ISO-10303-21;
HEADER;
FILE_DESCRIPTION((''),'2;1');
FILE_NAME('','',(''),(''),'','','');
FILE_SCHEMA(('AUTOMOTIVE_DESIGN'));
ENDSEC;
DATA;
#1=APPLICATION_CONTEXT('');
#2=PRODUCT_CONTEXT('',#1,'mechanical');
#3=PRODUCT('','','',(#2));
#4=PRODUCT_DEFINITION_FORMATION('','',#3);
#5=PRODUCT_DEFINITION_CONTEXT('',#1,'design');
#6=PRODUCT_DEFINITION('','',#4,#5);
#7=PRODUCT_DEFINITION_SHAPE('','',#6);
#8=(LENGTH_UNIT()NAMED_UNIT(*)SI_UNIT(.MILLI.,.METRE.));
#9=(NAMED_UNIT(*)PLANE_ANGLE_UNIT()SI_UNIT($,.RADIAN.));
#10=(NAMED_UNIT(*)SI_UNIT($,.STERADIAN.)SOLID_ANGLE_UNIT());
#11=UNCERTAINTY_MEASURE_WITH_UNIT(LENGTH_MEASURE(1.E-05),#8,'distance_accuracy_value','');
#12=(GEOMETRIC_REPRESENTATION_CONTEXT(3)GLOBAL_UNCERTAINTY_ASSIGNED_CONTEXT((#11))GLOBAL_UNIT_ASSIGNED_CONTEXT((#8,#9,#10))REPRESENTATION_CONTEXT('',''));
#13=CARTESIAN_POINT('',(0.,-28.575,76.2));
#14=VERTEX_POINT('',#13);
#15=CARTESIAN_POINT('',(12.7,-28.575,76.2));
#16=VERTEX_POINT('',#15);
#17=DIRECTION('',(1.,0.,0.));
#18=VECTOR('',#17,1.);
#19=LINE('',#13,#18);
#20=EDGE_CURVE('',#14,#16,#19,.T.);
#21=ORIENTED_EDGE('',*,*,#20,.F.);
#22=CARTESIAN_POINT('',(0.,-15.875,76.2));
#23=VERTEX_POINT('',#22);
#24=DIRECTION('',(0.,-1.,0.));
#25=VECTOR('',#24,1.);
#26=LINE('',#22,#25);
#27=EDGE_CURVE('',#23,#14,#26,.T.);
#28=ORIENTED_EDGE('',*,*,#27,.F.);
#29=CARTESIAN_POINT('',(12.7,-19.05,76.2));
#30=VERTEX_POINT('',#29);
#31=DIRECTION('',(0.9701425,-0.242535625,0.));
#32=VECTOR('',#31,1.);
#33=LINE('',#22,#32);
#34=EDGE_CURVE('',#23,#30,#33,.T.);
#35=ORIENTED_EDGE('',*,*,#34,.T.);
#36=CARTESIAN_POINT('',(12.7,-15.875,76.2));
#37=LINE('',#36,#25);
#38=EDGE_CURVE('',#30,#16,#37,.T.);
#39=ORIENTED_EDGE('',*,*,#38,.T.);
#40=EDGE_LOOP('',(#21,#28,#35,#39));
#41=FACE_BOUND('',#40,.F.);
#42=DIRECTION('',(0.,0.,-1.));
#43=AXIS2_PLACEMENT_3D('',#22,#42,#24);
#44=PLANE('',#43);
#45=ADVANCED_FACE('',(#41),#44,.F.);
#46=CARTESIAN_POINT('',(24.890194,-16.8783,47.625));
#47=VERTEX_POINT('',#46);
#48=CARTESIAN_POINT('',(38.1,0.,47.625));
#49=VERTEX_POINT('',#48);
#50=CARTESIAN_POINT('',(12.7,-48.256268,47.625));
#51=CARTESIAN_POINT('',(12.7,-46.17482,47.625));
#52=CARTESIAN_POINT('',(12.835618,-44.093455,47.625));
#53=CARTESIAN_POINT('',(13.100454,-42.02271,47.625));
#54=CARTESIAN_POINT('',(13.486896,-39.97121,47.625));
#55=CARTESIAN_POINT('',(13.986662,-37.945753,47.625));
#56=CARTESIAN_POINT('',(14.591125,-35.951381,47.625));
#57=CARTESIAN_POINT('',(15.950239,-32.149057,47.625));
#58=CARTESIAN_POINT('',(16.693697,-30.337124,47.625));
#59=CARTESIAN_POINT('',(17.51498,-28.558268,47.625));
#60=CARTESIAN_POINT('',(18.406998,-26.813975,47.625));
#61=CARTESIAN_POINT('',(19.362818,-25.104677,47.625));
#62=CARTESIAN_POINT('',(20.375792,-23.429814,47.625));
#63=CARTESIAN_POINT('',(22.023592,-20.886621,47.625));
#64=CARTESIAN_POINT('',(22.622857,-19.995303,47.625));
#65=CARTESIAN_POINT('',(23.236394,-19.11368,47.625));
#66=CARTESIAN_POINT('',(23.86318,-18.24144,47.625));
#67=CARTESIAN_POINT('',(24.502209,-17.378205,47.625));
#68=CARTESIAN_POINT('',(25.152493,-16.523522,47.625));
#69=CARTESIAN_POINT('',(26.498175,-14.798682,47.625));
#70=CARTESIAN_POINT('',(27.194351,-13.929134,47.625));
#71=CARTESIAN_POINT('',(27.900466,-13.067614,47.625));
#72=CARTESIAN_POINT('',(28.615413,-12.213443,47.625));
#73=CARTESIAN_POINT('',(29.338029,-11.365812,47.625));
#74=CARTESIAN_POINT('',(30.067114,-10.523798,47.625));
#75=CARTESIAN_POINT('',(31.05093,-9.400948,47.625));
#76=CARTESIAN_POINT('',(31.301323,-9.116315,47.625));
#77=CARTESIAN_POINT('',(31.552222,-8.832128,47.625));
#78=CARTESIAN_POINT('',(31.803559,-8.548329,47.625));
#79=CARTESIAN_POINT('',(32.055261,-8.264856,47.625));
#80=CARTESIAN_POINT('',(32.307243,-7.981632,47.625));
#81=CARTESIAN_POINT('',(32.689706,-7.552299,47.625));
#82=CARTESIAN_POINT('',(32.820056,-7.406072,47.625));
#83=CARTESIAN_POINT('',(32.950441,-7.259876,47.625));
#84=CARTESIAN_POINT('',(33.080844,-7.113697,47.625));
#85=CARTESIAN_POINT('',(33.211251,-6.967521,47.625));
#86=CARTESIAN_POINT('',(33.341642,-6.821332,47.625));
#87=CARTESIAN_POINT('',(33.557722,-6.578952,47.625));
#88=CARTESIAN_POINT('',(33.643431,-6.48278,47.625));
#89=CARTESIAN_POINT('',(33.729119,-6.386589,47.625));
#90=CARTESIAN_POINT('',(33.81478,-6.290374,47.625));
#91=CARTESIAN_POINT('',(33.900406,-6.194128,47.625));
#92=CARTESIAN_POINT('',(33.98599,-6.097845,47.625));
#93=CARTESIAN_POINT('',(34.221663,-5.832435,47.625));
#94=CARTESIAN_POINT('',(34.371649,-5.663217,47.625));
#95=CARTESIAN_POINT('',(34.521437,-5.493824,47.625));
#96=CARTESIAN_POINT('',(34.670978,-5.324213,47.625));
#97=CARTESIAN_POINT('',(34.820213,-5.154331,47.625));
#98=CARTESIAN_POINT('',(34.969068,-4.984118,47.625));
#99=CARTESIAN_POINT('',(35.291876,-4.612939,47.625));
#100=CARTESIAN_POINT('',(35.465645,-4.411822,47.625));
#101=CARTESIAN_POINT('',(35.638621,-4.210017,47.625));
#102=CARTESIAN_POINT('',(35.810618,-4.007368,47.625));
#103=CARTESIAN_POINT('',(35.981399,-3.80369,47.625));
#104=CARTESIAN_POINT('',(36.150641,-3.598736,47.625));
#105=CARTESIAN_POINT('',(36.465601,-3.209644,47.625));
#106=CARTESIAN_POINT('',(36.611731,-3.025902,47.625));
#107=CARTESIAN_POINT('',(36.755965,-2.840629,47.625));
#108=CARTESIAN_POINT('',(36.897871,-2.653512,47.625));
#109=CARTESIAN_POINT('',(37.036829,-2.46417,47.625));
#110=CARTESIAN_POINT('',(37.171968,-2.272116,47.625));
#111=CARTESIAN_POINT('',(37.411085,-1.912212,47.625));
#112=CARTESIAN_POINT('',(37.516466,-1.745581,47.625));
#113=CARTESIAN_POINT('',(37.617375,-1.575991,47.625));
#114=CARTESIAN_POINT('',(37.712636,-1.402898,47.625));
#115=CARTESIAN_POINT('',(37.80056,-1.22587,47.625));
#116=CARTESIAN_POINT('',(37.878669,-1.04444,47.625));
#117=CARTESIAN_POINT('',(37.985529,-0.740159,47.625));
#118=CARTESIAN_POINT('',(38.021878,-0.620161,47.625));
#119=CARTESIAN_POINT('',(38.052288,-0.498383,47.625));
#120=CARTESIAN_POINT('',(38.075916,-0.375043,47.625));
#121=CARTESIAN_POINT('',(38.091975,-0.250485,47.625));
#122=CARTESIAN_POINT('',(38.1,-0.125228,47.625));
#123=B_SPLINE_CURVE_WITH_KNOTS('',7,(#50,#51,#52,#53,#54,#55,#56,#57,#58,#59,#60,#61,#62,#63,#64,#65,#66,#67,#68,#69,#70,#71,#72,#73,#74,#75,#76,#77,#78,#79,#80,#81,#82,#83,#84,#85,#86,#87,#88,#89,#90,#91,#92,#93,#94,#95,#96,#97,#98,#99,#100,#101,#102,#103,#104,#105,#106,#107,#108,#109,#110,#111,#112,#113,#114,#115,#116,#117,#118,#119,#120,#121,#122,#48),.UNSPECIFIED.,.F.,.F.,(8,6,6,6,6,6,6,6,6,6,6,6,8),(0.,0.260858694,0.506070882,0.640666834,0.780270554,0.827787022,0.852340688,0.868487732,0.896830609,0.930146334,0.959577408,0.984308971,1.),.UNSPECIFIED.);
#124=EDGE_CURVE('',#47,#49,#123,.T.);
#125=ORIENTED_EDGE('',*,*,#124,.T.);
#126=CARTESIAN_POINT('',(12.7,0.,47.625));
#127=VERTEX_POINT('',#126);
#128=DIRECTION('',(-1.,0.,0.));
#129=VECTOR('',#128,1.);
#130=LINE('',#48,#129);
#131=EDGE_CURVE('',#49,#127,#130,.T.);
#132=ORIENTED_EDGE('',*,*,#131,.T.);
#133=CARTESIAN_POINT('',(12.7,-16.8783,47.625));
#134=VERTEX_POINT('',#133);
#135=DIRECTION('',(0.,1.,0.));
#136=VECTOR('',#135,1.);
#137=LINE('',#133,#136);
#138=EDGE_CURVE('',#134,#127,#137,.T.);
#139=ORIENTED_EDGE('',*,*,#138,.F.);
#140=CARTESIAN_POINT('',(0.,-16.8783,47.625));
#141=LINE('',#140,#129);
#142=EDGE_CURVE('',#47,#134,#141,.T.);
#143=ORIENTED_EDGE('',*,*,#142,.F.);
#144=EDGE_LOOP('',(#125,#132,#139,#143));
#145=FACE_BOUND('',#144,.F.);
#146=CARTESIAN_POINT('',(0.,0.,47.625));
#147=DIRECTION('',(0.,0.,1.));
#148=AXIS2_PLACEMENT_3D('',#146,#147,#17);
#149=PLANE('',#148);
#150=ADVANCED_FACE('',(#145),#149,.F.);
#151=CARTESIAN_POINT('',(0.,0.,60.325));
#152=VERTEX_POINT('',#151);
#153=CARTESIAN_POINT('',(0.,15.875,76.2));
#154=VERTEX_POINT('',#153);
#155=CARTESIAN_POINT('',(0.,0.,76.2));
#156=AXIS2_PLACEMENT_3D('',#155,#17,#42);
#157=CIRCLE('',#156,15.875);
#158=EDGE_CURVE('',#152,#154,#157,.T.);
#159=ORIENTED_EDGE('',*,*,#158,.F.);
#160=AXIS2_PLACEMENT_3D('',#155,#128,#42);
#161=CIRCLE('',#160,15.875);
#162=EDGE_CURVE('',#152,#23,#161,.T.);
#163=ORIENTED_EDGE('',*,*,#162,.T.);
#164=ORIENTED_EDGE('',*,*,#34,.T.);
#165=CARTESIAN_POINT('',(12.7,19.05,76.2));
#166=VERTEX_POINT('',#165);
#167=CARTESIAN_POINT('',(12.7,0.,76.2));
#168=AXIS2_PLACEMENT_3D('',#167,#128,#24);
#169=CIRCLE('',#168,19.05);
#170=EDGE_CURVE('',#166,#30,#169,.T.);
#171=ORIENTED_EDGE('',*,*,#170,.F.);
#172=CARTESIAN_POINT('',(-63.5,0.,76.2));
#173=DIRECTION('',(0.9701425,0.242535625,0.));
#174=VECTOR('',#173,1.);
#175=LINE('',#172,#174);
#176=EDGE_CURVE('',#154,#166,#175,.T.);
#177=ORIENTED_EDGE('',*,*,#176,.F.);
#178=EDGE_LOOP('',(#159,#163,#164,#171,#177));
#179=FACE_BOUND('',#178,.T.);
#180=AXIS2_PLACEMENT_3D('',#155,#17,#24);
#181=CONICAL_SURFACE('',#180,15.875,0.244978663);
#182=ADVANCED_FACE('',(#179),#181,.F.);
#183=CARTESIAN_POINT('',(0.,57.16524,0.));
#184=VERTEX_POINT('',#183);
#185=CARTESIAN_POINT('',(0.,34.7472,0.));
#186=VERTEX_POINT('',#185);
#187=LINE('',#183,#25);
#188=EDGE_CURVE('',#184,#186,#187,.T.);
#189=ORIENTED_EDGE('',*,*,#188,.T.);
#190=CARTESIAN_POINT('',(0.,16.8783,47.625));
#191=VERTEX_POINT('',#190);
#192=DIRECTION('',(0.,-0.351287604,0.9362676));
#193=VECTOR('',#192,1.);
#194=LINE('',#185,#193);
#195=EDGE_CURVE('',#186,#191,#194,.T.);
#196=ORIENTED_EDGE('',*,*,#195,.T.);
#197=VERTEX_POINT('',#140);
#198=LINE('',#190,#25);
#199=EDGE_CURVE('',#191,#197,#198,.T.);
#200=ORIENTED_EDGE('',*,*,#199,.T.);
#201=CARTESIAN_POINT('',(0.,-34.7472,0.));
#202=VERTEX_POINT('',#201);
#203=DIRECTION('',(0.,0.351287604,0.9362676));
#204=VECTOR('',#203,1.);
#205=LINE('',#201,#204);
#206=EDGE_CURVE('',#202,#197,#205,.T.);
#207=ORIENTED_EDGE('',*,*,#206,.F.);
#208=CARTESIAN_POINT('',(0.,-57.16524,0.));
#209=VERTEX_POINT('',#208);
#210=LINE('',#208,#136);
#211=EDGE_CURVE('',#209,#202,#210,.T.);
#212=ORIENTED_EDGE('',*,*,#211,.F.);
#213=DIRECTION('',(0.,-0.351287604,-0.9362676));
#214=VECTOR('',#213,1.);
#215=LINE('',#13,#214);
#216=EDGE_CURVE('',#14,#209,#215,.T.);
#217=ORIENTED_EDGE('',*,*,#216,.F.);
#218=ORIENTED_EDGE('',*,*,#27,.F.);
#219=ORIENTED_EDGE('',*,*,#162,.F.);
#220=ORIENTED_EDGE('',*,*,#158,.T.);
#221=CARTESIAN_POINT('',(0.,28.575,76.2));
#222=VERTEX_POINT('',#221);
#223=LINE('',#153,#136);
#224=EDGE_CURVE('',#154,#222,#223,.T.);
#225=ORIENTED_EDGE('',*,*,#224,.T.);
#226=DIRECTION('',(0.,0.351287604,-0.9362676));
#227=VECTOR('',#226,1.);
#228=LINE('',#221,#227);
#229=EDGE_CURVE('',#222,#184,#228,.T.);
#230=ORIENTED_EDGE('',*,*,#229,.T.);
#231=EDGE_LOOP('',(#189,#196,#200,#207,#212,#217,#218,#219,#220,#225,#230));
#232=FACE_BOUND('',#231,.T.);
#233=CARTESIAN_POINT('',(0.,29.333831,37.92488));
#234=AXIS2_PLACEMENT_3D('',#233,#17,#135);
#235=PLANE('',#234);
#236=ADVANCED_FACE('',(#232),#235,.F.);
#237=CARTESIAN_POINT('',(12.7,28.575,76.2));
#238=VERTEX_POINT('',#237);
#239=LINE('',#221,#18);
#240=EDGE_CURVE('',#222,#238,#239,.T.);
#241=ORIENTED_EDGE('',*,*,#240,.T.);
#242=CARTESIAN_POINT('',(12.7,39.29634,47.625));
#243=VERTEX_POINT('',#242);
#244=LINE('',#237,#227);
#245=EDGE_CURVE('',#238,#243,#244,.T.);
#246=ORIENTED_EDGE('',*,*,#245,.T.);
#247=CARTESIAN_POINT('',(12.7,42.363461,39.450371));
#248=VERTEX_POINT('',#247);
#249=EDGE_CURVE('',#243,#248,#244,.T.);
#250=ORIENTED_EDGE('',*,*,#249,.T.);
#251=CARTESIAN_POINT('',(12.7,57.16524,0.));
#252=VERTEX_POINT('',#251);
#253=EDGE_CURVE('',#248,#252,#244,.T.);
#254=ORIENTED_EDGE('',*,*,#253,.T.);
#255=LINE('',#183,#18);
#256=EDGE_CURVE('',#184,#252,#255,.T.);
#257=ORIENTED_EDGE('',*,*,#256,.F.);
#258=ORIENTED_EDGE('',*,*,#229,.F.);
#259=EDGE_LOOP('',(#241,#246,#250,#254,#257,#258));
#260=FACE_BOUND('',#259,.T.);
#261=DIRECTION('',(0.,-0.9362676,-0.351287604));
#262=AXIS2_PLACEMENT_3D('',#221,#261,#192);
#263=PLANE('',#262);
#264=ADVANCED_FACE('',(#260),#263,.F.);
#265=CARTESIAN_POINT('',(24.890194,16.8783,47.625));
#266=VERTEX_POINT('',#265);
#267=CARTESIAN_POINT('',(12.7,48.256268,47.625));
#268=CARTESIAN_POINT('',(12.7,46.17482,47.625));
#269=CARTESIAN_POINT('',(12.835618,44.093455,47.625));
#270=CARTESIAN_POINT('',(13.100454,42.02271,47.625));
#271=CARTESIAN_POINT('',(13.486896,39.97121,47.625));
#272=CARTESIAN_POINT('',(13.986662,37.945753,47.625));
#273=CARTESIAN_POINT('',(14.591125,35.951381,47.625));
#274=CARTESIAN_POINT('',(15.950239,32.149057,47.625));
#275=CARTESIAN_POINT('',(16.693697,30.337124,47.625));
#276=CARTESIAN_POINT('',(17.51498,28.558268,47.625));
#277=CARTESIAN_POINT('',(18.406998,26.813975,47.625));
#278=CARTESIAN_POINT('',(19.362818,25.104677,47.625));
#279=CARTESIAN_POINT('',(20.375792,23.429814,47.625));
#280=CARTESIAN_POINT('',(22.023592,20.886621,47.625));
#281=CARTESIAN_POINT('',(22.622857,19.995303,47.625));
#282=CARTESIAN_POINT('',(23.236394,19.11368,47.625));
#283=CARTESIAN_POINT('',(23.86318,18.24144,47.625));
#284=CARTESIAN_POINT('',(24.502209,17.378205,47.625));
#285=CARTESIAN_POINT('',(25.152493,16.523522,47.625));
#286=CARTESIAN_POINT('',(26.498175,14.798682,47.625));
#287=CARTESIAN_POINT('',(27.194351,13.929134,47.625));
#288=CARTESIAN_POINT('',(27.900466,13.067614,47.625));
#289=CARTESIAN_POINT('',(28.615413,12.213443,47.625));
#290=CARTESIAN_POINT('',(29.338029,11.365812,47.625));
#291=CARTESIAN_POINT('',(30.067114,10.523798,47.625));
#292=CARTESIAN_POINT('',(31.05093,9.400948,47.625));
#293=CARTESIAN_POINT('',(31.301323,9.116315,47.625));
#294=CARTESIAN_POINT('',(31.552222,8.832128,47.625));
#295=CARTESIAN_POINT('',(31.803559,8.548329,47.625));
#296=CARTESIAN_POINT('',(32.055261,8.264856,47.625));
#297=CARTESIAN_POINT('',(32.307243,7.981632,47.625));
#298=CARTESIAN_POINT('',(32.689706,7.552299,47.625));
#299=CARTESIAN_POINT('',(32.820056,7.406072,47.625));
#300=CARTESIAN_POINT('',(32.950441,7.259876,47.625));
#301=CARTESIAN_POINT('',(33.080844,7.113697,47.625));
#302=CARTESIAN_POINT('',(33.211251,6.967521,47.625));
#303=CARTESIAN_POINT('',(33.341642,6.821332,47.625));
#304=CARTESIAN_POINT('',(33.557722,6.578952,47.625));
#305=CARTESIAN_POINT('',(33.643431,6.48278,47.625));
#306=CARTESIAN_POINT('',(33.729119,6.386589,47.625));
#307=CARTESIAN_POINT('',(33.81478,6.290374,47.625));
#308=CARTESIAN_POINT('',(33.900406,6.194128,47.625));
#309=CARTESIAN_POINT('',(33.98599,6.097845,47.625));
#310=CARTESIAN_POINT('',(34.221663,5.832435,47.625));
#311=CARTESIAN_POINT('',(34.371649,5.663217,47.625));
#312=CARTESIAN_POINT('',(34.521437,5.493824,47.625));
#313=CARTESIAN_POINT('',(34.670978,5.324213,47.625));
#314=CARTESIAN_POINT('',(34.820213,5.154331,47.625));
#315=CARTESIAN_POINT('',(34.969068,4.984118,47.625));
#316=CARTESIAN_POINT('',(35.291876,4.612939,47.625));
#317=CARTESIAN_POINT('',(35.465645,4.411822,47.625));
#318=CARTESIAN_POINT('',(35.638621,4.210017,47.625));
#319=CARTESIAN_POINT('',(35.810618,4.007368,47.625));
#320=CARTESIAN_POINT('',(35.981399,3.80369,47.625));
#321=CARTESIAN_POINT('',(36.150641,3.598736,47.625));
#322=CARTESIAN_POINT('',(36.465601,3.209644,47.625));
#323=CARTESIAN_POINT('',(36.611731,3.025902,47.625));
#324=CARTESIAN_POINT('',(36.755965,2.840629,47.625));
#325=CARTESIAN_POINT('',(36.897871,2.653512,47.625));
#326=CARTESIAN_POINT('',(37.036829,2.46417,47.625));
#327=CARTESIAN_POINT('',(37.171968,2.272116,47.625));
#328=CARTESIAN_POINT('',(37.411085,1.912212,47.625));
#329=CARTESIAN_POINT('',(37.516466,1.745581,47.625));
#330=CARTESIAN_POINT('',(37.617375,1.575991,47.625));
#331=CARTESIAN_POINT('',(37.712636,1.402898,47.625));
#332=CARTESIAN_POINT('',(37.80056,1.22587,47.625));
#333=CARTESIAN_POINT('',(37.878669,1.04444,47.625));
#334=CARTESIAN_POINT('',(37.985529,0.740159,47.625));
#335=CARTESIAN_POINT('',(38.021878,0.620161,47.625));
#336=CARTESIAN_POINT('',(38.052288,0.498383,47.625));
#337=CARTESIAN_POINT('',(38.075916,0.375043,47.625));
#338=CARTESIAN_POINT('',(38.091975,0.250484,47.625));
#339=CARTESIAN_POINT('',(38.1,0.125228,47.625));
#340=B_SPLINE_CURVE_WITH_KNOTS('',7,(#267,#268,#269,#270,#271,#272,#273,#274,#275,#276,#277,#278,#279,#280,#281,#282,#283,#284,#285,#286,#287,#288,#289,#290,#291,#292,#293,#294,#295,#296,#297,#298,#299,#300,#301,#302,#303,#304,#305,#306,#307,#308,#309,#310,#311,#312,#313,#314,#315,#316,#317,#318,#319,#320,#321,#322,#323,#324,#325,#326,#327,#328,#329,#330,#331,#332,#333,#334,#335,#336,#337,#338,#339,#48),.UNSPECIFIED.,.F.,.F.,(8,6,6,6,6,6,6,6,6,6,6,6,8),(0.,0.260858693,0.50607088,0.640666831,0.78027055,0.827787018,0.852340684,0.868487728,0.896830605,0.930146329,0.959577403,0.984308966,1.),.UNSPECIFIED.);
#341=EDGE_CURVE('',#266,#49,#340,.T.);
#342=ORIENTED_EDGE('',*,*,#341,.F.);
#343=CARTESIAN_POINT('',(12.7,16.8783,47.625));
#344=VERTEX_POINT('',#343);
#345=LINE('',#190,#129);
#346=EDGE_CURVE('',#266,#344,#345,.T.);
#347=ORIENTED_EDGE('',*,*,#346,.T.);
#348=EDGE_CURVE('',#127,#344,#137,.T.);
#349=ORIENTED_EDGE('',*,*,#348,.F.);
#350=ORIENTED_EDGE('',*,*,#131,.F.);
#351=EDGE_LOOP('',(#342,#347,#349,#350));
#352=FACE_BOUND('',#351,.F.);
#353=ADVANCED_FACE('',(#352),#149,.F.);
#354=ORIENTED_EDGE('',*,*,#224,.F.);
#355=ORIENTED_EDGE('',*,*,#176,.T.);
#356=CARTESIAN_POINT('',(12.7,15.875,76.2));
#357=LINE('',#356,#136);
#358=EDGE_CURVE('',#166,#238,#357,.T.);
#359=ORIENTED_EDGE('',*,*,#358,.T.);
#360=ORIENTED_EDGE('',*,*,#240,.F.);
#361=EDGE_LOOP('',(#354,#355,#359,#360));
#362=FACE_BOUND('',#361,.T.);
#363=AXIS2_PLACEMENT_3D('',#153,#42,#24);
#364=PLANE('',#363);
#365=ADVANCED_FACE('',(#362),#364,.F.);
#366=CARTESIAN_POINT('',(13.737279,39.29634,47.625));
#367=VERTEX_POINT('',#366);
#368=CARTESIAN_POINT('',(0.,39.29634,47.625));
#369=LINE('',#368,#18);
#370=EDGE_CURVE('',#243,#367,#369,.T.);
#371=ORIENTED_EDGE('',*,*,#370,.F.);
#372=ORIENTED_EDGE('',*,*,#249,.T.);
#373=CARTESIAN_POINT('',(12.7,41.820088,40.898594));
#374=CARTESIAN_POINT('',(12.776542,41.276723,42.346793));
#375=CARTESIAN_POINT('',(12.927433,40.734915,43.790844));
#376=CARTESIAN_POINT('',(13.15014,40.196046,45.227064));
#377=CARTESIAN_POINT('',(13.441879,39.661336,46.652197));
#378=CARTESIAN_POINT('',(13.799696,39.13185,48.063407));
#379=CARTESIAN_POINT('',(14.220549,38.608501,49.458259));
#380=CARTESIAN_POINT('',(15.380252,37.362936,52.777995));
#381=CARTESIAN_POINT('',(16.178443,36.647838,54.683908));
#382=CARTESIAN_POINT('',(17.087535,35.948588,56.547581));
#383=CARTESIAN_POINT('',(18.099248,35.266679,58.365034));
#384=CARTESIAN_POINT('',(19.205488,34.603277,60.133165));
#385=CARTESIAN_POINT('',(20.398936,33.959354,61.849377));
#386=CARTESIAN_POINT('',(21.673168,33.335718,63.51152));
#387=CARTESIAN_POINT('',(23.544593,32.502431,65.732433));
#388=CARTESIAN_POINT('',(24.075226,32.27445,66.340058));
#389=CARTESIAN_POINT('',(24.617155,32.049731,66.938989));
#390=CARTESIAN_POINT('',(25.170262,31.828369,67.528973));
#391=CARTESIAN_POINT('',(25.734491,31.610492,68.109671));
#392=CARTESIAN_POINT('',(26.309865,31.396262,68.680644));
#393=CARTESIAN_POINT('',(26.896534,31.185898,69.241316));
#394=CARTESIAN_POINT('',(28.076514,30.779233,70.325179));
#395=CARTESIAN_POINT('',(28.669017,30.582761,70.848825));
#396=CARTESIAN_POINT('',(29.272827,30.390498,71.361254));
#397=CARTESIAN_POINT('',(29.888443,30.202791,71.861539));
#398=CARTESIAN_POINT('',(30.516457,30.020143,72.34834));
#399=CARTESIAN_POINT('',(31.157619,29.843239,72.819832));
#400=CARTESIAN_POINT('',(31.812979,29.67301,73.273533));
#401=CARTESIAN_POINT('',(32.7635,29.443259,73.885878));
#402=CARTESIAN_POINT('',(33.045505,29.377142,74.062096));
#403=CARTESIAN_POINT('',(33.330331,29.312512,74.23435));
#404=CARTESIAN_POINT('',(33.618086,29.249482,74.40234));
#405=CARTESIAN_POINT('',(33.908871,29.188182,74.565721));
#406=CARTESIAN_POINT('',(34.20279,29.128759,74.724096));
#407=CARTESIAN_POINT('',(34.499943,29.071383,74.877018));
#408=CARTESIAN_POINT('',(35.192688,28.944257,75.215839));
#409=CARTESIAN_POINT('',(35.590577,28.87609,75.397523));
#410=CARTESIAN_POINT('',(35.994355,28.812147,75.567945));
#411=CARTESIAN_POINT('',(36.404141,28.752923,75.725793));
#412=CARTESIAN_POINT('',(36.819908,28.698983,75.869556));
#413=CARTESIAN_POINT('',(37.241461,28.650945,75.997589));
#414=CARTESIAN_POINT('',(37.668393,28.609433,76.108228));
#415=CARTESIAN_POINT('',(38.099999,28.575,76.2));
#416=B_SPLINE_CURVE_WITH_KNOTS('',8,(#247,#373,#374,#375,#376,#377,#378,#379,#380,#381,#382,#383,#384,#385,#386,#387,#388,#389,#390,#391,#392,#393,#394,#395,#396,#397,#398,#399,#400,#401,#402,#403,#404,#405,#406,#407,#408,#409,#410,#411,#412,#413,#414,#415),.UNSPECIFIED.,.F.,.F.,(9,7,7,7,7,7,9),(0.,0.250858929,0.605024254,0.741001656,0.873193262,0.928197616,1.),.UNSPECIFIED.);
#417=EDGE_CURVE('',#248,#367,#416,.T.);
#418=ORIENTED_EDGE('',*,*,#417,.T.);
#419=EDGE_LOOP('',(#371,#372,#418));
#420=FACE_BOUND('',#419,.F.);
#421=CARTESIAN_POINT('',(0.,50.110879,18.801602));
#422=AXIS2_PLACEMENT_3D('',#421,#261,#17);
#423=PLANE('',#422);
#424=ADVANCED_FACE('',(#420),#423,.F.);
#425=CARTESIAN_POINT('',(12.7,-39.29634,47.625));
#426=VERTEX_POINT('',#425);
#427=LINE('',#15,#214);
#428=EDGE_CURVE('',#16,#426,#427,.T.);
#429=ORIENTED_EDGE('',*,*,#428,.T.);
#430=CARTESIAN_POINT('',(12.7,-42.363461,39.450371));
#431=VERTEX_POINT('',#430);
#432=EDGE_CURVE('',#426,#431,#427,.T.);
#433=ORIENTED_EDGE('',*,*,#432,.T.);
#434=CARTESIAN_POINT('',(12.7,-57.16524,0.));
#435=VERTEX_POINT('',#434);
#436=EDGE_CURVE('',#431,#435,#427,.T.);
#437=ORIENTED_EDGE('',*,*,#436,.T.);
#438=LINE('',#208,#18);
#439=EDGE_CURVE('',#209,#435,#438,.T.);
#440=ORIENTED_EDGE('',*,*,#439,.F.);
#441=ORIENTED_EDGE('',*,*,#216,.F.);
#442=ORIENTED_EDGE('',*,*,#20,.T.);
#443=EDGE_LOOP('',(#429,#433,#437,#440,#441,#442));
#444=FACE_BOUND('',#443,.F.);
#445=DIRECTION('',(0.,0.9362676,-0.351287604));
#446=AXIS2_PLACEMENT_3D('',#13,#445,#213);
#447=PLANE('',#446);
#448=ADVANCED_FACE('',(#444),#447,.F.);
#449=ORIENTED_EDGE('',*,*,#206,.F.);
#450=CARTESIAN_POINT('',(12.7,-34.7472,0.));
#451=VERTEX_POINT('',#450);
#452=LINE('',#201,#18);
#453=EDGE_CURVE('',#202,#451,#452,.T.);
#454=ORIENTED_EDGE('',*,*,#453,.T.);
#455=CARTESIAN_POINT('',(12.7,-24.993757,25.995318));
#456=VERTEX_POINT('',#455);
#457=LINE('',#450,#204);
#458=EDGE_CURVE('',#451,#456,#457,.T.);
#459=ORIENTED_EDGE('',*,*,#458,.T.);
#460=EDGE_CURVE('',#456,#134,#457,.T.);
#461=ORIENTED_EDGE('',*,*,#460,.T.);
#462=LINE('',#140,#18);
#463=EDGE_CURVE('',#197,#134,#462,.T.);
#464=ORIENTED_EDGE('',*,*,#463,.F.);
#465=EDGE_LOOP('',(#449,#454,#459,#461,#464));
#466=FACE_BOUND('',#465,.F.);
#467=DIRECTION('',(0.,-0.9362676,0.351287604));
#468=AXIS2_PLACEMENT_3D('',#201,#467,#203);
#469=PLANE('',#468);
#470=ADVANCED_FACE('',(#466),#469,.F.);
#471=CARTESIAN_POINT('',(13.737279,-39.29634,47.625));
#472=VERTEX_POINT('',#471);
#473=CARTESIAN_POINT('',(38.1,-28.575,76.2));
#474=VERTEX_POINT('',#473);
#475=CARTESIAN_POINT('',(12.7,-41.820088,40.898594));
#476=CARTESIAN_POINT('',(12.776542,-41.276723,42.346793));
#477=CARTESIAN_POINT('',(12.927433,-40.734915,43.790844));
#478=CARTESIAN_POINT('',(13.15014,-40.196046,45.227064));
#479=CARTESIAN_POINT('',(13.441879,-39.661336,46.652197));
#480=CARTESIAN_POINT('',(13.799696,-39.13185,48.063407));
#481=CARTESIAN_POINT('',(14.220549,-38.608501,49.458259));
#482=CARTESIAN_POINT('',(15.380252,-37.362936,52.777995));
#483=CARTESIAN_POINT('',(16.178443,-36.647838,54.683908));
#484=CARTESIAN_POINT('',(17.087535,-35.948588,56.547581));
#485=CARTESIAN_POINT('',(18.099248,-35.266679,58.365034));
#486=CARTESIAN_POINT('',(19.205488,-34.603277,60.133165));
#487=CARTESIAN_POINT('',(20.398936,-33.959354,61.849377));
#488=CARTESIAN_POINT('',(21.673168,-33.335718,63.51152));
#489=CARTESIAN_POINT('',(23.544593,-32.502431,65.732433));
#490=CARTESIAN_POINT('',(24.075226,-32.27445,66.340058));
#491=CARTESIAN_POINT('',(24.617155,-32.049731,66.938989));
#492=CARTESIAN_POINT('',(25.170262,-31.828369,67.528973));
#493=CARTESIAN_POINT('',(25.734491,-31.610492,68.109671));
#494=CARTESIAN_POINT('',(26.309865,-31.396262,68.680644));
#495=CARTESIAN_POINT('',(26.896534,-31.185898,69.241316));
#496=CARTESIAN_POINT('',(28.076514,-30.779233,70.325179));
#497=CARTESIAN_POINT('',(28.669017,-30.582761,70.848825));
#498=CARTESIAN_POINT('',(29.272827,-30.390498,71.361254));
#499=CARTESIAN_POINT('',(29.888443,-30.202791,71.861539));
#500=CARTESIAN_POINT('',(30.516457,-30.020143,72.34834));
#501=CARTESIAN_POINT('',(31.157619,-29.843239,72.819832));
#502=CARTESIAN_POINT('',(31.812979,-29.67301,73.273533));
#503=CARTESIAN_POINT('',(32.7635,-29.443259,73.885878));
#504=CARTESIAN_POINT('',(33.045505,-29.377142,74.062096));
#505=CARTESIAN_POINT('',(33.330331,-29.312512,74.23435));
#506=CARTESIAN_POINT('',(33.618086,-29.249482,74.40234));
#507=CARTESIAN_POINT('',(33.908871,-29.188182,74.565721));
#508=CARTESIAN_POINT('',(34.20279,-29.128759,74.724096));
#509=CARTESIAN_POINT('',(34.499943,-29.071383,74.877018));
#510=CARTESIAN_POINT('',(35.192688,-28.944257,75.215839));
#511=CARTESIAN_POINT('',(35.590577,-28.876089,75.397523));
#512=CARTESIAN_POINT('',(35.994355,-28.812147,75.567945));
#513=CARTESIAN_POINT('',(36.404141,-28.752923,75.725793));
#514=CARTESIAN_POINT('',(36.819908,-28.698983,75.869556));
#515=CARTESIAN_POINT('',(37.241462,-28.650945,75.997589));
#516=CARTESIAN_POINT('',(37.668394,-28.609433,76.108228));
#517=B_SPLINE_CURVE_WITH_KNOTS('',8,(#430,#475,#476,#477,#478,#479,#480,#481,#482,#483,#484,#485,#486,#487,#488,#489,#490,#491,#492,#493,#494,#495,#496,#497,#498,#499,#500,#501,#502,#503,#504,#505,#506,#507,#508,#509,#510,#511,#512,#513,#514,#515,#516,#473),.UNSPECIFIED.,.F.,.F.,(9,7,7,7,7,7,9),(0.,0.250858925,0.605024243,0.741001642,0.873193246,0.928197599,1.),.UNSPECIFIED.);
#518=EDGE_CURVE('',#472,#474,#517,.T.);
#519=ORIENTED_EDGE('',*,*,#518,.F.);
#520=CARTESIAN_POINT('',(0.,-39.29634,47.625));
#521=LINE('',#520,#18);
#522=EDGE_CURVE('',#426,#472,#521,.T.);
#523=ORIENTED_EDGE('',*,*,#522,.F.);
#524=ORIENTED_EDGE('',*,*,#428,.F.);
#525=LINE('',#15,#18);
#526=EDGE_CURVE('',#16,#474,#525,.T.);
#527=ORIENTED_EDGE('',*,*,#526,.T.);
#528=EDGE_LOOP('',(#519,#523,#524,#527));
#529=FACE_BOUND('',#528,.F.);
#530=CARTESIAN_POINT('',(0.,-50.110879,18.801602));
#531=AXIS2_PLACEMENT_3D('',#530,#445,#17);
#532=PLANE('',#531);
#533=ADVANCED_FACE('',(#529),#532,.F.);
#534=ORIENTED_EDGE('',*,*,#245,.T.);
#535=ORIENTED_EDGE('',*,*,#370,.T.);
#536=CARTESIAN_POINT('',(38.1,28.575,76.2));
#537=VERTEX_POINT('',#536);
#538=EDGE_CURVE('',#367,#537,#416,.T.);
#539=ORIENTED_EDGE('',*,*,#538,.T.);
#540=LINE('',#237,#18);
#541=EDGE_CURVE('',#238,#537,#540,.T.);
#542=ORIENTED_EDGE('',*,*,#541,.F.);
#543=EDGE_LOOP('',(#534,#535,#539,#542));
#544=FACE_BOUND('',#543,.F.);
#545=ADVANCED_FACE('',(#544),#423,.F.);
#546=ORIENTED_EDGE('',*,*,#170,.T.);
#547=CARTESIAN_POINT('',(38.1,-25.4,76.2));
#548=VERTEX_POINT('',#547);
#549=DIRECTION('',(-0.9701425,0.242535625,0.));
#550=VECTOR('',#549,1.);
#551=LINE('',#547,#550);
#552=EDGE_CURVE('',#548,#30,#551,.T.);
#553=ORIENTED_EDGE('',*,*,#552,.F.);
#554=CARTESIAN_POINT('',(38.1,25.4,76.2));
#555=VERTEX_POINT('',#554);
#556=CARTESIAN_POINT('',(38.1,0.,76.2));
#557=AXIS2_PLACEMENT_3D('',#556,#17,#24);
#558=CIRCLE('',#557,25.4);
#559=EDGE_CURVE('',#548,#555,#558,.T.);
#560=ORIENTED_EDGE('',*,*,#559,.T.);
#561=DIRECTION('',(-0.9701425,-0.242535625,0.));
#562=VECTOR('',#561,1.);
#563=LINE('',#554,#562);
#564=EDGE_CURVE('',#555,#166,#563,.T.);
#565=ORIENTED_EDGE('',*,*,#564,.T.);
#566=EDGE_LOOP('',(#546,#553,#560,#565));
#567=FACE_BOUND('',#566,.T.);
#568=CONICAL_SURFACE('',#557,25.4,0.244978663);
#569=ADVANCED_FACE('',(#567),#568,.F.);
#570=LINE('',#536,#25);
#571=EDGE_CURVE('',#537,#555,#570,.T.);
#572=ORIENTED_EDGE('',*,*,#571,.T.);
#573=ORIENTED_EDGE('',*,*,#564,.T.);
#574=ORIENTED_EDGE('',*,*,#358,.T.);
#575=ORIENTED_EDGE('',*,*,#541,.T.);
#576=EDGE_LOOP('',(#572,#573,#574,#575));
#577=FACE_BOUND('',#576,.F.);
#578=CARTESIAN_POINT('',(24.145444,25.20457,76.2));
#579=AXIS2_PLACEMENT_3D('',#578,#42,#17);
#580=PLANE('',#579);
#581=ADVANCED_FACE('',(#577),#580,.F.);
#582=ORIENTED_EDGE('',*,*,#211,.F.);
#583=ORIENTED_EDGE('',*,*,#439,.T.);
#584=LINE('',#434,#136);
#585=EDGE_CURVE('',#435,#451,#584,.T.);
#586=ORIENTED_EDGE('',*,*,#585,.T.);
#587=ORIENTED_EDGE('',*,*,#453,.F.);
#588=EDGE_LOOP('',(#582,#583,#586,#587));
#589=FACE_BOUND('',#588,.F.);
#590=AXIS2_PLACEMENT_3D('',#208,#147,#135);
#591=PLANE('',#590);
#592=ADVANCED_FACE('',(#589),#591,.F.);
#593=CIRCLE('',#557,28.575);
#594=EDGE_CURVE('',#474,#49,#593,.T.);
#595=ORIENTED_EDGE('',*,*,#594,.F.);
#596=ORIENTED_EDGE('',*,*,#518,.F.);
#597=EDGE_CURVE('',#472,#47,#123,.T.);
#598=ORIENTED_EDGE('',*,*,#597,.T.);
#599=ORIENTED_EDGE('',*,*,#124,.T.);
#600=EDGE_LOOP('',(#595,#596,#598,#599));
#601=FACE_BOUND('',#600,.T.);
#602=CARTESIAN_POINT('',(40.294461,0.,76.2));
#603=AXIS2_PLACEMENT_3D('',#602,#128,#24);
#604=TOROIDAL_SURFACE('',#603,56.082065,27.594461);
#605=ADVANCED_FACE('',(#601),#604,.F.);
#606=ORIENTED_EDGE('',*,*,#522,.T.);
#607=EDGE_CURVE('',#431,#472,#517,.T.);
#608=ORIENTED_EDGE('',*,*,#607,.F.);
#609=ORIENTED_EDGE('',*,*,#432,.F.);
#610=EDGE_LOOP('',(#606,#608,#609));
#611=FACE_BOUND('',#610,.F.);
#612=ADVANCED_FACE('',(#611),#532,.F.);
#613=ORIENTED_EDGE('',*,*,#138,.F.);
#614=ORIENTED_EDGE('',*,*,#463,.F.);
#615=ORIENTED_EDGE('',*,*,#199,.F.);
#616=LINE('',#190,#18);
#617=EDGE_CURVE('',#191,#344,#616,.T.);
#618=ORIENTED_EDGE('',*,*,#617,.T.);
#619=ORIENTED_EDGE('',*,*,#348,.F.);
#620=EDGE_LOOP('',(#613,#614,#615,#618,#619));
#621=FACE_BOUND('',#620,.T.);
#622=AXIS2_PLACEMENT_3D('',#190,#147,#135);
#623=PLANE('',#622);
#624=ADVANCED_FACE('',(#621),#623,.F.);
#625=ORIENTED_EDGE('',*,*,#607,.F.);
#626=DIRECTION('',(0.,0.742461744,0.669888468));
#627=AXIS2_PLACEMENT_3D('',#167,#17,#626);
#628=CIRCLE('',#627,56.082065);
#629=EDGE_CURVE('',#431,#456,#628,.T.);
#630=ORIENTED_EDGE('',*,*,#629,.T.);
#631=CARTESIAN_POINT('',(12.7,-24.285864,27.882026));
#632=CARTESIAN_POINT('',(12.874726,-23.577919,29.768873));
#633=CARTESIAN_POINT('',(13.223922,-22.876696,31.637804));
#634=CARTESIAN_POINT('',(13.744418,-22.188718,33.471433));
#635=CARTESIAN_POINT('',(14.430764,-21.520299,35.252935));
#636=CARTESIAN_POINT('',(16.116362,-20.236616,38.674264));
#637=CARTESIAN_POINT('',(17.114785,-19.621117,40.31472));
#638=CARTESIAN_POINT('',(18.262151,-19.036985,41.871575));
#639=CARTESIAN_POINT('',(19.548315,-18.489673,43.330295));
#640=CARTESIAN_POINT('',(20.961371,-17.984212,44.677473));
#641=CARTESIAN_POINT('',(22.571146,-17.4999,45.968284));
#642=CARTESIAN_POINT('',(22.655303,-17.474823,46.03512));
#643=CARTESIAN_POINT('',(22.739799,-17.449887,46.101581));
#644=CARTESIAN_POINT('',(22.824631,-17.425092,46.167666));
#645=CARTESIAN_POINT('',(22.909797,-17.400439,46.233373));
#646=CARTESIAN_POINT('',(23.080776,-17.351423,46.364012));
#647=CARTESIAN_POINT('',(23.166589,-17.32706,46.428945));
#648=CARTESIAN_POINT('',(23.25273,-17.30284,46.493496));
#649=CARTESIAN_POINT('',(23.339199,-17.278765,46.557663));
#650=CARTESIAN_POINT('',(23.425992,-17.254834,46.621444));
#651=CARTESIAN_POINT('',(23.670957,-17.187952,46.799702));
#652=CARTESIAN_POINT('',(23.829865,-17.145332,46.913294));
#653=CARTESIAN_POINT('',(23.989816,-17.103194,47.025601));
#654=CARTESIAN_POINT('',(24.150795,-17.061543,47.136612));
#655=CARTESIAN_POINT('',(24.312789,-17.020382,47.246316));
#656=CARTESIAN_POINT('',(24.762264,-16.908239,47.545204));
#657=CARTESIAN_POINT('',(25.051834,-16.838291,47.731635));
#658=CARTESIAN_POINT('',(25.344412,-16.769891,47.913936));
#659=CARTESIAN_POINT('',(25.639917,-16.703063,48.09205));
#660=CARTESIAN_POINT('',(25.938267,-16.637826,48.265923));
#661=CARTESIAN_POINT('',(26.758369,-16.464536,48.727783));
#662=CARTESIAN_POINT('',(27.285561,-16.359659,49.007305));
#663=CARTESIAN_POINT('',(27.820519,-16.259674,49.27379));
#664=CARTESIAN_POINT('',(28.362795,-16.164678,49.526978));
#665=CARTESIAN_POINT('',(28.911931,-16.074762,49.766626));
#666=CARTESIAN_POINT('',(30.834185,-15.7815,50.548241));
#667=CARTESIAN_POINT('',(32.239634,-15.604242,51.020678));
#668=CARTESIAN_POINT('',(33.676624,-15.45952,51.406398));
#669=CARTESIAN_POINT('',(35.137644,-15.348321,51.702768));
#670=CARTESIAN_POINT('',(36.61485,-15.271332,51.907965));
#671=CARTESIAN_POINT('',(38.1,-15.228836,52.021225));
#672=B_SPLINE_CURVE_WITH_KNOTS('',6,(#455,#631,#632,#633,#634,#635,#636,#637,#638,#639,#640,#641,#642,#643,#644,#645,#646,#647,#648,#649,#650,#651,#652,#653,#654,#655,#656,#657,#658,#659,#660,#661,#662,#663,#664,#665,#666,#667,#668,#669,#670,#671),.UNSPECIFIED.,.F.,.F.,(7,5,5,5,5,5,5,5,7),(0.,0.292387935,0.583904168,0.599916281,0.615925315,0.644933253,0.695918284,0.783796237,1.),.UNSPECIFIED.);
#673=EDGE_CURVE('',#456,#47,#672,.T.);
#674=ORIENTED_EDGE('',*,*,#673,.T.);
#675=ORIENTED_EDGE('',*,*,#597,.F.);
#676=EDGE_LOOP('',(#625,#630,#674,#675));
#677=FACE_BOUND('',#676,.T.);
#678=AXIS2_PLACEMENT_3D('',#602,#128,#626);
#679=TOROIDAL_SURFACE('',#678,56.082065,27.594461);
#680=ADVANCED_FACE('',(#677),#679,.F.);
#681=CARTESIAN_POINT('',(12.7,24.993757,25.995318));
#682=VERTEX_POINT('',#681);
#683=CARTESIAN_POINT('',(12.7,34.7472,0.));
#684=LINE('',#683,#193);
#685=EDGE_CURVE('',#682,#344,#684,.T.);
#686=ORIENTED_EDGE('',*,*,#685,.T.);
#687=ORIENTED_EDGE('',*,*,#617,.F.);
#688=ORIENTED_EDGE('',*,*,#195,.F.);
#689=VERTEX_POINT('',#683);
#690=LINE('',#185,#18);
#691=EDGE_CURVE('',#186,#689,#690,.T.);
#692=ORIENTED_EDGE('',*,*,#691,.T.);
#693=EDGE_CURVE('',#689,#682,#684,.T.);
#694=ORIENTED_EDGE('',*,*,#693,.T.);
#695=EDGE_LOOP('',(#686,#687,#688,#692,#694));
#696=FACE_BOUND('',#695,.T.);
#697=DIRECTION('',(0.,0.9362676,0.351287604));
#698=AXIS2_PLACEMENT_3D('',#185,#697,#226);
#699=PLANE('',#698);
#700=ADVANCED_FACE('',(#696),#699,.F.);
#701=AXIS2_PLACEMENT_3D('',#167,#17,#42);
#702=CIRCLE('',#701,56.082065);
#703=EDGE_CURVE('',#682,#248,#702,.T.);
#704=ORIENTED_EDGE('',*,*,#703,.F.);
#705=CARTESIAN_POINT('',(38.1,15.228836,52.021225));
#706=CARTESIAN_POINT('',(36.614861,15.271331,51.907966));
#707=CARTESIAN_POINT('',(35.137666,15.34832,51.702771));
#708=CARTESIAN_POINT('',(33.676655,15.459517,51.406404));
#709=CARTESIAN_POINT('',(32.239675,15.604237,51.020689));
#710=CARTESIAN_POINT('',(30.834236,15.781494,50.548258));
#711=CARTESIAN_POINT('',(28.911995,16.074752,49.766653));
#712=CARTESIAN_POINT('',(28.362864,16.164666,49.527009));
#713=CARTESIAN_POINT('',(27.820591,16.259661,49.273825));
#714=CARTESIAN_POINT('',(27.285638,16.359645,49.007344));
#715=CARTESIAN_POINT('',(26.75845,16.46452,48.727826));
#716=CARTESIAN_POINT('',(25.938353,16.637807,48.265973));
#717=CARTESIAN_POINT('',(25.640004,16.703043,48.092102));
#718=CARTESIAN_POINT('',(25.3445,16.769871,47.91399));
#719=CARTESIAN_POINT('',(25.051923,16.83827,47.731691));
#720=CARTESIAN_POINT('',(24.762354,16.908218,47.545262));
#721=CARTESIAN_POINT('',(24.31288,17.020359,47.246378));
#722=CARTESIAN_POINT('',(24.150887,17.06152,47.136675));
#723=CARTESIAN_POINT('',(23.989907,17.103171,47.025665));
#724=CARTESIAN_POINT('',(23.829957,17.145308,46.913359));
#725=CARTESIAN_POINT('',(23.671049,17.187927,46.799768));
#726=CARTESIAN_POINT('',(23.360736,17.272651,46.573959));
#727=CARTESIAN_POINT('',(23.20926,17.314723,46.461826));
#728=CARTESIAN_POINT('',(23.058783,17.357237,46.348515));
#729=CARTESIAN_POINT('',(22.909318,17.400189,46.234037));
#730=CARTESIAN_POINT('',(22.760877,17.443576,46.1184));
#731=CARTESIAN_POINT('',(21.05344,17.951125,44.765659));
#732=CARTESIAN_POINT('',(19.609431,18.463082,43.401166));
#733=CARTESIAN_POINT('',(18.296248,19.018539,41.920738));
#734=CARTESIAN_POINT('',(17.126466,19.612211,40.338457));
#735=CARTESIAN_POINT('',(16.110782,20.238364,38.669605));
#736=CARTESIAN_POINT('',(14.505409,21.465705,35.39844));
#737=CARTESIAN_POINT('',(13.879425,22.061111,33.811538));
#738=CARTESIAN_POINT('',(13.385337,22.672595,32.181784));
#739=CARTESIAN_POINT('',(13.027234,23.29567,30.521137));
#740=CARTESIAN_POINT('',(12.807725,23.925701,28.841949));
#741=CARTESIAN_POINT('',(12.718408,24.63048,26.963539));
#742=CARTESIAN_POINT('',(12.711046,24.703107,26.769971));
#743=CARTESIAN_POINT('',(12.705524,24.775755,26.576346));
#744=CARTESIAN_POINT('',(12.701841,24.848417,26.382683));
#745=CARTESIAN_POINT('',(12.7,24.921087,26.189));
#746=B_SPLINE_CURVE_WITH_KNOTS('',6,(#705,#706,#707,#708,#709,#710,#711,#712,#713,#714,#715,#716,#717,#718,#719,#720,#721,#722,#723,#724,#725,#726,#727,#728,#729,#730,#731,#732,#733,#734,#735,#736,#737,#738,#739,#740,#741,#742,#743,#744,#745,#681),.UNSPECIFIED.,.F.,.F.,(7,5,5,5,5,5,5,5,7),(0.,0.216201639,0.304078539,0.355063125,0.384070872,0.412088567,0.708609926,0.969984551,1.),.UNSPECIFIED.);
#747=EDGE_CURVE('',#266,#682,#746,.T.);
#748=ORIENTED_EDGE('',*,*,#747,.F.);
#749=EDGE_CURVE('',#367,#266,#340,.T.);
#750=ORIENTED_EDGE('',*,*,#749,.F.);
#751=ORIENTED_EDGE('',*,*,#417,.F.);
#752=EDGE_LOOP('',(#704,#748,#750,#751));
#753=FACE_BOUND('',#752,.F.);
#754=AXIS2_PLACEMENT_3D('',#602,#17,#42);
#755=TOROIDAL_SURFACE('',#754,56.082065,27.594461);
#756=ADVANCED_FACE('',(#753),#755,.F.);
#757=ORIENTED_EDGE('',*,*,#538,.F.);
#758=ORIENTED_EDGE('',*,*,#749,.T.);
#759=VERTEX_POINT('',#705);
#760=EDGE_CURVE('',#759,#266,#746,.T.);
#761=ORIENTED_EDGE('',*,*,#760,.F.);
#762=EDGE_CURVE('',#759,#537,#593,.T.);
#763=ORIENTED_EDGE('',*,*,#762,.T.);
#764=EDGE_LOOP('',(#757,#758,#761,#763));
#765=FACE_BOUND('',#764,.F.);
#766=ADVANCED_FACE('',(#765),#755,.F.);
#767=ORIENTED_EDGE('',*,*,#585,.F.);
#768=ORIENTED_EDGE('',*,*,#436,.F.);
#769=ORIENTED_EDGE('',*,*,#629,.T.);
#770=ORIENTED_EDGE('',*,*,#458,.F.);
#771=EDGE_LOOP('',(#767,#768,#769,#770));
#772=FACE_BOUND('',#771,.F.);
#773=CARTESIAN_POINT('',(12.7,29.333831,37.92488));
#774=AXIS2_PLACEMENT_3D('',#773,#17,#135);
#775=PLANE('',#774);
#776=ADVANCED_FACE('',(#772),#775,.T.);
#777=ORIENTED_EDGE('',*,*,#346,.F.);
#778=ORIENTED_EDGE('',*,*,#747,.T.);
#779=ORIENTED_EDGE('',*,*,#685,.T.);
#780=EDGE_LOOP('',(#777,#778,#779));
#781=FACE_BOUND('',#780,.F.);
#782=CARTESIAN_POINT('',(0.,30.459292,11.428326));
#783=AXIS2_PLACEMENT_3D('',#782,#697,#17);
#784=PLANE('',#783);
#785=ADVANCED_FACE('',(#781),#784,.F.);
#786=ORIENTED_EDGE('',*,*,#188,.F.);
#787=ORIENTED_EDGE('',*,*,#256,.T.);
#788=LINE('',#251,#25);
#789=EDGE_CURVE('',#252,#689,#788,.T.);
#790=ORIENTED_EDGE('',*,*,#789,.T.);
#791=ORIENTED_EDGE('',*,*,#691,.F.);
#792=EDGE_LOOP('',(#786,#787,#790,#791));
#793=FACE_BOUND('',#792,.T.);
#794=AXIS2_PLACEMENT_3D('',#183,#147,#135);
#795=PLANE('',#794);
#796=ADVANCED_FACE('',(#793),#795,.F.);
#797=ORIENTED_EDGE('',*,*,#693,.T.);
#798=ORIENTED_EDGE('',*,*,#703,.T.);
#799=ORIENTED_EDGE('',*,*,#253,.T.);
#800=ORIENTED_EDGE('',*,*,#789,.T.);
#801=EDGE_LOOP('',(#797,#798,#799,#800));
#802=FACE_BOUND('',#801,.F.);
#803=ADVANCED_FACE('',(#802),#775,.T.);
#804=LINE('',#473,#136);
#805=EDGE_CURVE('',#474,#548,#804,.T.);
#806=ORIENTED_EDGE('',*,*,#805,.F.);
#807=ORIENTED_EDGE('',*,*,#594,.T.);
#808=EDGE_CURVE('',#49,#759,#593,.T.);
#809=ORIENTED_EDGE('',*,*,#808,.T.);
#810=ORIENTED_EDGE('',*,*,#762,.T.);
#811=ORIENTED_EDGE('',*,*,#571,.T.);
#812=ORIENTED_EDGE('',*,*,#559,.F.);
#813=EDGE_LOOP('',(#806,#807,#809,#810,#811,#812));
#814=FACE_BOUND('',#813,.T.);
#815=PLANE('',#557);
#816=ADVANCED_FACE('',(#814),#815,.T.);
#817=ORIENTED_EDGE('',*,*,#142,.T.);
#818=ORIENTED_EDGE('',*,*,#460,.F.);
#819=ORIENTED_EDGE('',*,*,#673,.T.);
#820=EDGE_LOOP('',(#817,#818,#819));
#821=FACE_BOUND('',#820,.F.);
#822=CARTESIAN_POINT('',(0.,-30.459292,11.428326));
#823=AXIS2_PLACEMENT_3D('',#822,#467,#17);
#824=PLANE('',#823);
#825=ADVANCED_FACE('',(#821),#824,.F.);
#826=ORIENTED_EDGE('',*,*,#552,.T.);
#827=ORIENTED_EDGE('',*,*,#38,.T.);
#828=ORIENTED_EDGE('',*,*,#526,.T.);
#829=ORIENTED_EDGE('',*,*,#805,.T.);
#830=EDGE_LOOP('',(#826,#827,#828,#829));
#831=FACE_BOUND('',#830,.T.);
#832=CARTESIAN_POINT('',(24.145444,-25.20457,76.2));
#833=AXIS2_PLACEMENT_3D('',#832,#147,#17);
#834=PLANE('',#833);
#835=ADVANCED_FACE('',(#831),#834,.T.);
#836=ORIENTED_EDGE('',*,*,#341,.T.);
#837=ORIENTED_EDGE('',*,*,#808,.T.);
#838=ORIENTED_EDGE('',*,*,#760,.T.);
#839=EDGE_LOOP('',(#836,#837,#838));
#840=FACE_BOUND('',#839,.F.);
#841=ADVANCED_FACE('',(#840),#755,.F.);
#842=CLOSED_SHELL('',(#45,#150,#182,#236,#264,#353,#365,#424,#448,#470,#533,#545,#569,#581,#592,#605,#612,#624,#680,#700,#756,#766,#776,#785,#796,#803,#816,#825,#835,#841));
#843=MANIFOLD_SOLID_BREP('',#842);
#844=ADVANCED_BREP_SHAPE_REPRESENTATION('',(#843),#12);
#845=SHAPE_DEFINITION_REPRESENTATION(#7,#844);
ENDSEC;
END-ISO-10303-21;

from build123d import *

# Parameters (mm, degrees)
F1_DEPTH     = 12.7
F6_ANGLE     = 180
F7_T4_ANGLE  = 90.0000003922
F7_T10_ANGLE = 227.9415431295
F7_T17_ANGLE = 89.9999996078
F7_T23_ANGLE = 89.9999996078


# Not quite as in the source:
# - a fillet or chamfer that OpenCascade refuses, or shapes differently, is made with other operations: its cross-section is extruded or revolved along the edge and cut away or added


with BuildPart() as f1:
    # F0 (on Right) → F1 (new body)
    with BuildSketch(Plane.YZ):
        with BuildLine():
            Line((-57.16524, 0), (-34.7472, 0))
            Line((-34.7472, 0), (-16.8783, 47.625))
            Line((-16.8783, 47.625), (0, 47.625))
            Line((0, 47.625), (0, 60.325))
            ThreePointArc((0, 60.325), (-11.2253201513, 64.9746798487), (-15.875, 76.2))
            Line((-15.875, 76.2), (-28.575, 76.2))
            Line((-28.575, 76.2), (-57.16524, 0))
        make_face()
    extrude(amount=F1_DEPTH)

    # F2: F1 across plane


with BuildPart() as f1_1:
    add(f1.part)
    add(f1.part.mirror(Plane.XZ))

    # F3 (on face) → F4 (revolve, cut)
    with BuildSketch(Plane.XY.offset(76.2)):
        Polygon((12.7, -15.875), (0, -15.875), (12.7, -19.05), align=None)
    revolve(axis=Axis((5.5597093888, 0, 76.2), (-1, 0, 0)), mode=Mode.SUBTRACT)

    # F5 (on face) → F6 (revolve)
    with BuildSketch(Plane.XY.offset(76.2)):
        Polygon((38.1, -25.4), (12.7, -19.05), (12.7, -28.575), (38.1, -28.575), align=None)
    revolve(axis=Axis((19.4450803101, 0, 76.2), (1, 0, 0)), revolution_arc=F6_ANGLE)

    # F7: fillet of radius 27.5944610179 on 1 edges, made by hand


with BuildPart() as f7_tool2:
    # F7_s3 → F7_t4 (revolve)
    with BuildSketch(Plane.XY.offset(76.2)):
        with BuildLine():
            ThreePointArc((12.7, -56.0820649054), (20.0212120444, -37.3617642954), (38.1, -28.575))
            Line((38.1, -28.575), (12.7, -28.575))
            Line((12.7, -28.575), (12.7, -56.0820649054))
        make_face()
    revolve(axis=Axis((12.7, 0, 76.2), (1, 0, 0)), revolution_arc=F7_T4_ANGLE)

    split(bisect_by=Plane(origin=(0, -50.1108790038, 18.8016018022), x_dir=(1, 0, 0), z_dir=(0, 0.9362676004, -0.3512876037)), keep=Keep.TOP)

    split(bisect_by=Plane.XY.offset(47.625), keep=Keep.TOP)


with BuildPart() as f1_2:
    add(f1_1.part)

    # F7_t1: union F7_tool2
    add(f7_tool2.part)


with BuildPart() as f7_tool8:
    # F7_s9 → F7_t10 (revolve)
    with BuildSketch(Plane(origin=(0, -37.8993318562, 42.0052074025), x_dir=(1, 0, 0), z_dir=(0, 0.6698884676, -0.7424617438))):
        with BuildLine():
            ThreePointArc((12.7, -107.1275661365), (20.0212120444, -88.4072655265), (38.1, -79.6205012311))
            Line((38.1, -79.6205012311), (12.7, -79.6205012311))
            Line((12.7, -79.6205012311), (12.7, -107.1275661365))
        make_face()
    revolve(axis=Axis((12.7, 0, 76.2), (1, 0, 0)), revolution_arc=F7_T10_ANGLE)

    split(bisect_by=Plane(origin=(0, -50.1108790038, 18.8016018022), x_dir=(1, 0, 0), z_dir=(0, 0.9362676004, -0.3512876037)), keep=Keep.TOP)

    split(bisect_by=Plane(origin=(0, -30.4592919565, 11.4283263421), x_dir=(1, 0, 0), z_dir=(0, -0.9362676004, 0.3512876037)), keep=Keep.TOP)

    split(bisect_by=Plane.XY.offset(47.625), keep=Keep.BOTTOM)


with BuildPart() as f1_3:
    add(f1_2.part)

    # F7_t7: union F7_tool8
    add(f7_tool8.part)


with BuildPart() as f7_tool15:
    # F7_s16 → F7_t17 (revolve)
    with BuildSketch(Plane.XZ):
        with BuildLine():
            ThreePointArc((38.1, 47.625), (20.0212120444, 38.8382357046), (12.7, 20.1179350946))
            Line((12.7, 20.1179350946), (12.7, 47.625))
            Line((12.7, 47.625), (38.1, 47.625))
        make_face()
    revolve(axis=Axis((12.7, 0, 76.2), (1, 0, 0)), revolution_arc=F7_T17_ANGLE)

    split(bisect_by=Plane.XY.offset(47.625), keep=Keep.TOP)

    split(bisect_by=Plane(origin=(0, 50.1108790038, 18.8016018022), x_dir=(1, 0, 0), z_dir=(0, -0.9362676004, -0.3512876037)), keep=Keep.TOP)


with BuildPart() as f1_4:
    add(f1_3.part)

    # F7_t14: union F7_tool15
    add(f7_tool15.part)


with BuildPart() as f7_tool21:
    # F7_s22 → F7_t23 (revolve)
    with BuildSketch(Plane.XZ):
        with BuildLine():
            ThreePointArc((38.1, 47.625), (20.0212120444, 38.8382357046), (12.7, 20.1179350946))
            Line((12.7, 20.1179350946), (12.7, 47.625))
            Line((12.7, 47.625), (38.1, 47.625))
        make_face()
    revolve(axis=Axis((12.7, 0, 76.2), (1, 0, 0)), revolution_arc=F7_T23_ANGLE)

    split(bisect_by=Plane(origin=(0, 30.4592919565, 11.4283263421), x_dir=(1, 0, 0), z_dir=(0, 0.9362676004, 0.3512876037)), keep=Keep.TOP)

    split(bisect_by=Plane(origin=(0, 50.1108790038, 18.8016018022), x_dir=(1, 0, 0), z_dir=(0, -0.9362676004, -0.3512876037)), keep=Keep.TOP)


with BuildPart() as f1_5:
    add(f1_4.part)

    # F7_t20: union F7_tool21
    add(f7_tool21.part)


solid = f1_5.part
